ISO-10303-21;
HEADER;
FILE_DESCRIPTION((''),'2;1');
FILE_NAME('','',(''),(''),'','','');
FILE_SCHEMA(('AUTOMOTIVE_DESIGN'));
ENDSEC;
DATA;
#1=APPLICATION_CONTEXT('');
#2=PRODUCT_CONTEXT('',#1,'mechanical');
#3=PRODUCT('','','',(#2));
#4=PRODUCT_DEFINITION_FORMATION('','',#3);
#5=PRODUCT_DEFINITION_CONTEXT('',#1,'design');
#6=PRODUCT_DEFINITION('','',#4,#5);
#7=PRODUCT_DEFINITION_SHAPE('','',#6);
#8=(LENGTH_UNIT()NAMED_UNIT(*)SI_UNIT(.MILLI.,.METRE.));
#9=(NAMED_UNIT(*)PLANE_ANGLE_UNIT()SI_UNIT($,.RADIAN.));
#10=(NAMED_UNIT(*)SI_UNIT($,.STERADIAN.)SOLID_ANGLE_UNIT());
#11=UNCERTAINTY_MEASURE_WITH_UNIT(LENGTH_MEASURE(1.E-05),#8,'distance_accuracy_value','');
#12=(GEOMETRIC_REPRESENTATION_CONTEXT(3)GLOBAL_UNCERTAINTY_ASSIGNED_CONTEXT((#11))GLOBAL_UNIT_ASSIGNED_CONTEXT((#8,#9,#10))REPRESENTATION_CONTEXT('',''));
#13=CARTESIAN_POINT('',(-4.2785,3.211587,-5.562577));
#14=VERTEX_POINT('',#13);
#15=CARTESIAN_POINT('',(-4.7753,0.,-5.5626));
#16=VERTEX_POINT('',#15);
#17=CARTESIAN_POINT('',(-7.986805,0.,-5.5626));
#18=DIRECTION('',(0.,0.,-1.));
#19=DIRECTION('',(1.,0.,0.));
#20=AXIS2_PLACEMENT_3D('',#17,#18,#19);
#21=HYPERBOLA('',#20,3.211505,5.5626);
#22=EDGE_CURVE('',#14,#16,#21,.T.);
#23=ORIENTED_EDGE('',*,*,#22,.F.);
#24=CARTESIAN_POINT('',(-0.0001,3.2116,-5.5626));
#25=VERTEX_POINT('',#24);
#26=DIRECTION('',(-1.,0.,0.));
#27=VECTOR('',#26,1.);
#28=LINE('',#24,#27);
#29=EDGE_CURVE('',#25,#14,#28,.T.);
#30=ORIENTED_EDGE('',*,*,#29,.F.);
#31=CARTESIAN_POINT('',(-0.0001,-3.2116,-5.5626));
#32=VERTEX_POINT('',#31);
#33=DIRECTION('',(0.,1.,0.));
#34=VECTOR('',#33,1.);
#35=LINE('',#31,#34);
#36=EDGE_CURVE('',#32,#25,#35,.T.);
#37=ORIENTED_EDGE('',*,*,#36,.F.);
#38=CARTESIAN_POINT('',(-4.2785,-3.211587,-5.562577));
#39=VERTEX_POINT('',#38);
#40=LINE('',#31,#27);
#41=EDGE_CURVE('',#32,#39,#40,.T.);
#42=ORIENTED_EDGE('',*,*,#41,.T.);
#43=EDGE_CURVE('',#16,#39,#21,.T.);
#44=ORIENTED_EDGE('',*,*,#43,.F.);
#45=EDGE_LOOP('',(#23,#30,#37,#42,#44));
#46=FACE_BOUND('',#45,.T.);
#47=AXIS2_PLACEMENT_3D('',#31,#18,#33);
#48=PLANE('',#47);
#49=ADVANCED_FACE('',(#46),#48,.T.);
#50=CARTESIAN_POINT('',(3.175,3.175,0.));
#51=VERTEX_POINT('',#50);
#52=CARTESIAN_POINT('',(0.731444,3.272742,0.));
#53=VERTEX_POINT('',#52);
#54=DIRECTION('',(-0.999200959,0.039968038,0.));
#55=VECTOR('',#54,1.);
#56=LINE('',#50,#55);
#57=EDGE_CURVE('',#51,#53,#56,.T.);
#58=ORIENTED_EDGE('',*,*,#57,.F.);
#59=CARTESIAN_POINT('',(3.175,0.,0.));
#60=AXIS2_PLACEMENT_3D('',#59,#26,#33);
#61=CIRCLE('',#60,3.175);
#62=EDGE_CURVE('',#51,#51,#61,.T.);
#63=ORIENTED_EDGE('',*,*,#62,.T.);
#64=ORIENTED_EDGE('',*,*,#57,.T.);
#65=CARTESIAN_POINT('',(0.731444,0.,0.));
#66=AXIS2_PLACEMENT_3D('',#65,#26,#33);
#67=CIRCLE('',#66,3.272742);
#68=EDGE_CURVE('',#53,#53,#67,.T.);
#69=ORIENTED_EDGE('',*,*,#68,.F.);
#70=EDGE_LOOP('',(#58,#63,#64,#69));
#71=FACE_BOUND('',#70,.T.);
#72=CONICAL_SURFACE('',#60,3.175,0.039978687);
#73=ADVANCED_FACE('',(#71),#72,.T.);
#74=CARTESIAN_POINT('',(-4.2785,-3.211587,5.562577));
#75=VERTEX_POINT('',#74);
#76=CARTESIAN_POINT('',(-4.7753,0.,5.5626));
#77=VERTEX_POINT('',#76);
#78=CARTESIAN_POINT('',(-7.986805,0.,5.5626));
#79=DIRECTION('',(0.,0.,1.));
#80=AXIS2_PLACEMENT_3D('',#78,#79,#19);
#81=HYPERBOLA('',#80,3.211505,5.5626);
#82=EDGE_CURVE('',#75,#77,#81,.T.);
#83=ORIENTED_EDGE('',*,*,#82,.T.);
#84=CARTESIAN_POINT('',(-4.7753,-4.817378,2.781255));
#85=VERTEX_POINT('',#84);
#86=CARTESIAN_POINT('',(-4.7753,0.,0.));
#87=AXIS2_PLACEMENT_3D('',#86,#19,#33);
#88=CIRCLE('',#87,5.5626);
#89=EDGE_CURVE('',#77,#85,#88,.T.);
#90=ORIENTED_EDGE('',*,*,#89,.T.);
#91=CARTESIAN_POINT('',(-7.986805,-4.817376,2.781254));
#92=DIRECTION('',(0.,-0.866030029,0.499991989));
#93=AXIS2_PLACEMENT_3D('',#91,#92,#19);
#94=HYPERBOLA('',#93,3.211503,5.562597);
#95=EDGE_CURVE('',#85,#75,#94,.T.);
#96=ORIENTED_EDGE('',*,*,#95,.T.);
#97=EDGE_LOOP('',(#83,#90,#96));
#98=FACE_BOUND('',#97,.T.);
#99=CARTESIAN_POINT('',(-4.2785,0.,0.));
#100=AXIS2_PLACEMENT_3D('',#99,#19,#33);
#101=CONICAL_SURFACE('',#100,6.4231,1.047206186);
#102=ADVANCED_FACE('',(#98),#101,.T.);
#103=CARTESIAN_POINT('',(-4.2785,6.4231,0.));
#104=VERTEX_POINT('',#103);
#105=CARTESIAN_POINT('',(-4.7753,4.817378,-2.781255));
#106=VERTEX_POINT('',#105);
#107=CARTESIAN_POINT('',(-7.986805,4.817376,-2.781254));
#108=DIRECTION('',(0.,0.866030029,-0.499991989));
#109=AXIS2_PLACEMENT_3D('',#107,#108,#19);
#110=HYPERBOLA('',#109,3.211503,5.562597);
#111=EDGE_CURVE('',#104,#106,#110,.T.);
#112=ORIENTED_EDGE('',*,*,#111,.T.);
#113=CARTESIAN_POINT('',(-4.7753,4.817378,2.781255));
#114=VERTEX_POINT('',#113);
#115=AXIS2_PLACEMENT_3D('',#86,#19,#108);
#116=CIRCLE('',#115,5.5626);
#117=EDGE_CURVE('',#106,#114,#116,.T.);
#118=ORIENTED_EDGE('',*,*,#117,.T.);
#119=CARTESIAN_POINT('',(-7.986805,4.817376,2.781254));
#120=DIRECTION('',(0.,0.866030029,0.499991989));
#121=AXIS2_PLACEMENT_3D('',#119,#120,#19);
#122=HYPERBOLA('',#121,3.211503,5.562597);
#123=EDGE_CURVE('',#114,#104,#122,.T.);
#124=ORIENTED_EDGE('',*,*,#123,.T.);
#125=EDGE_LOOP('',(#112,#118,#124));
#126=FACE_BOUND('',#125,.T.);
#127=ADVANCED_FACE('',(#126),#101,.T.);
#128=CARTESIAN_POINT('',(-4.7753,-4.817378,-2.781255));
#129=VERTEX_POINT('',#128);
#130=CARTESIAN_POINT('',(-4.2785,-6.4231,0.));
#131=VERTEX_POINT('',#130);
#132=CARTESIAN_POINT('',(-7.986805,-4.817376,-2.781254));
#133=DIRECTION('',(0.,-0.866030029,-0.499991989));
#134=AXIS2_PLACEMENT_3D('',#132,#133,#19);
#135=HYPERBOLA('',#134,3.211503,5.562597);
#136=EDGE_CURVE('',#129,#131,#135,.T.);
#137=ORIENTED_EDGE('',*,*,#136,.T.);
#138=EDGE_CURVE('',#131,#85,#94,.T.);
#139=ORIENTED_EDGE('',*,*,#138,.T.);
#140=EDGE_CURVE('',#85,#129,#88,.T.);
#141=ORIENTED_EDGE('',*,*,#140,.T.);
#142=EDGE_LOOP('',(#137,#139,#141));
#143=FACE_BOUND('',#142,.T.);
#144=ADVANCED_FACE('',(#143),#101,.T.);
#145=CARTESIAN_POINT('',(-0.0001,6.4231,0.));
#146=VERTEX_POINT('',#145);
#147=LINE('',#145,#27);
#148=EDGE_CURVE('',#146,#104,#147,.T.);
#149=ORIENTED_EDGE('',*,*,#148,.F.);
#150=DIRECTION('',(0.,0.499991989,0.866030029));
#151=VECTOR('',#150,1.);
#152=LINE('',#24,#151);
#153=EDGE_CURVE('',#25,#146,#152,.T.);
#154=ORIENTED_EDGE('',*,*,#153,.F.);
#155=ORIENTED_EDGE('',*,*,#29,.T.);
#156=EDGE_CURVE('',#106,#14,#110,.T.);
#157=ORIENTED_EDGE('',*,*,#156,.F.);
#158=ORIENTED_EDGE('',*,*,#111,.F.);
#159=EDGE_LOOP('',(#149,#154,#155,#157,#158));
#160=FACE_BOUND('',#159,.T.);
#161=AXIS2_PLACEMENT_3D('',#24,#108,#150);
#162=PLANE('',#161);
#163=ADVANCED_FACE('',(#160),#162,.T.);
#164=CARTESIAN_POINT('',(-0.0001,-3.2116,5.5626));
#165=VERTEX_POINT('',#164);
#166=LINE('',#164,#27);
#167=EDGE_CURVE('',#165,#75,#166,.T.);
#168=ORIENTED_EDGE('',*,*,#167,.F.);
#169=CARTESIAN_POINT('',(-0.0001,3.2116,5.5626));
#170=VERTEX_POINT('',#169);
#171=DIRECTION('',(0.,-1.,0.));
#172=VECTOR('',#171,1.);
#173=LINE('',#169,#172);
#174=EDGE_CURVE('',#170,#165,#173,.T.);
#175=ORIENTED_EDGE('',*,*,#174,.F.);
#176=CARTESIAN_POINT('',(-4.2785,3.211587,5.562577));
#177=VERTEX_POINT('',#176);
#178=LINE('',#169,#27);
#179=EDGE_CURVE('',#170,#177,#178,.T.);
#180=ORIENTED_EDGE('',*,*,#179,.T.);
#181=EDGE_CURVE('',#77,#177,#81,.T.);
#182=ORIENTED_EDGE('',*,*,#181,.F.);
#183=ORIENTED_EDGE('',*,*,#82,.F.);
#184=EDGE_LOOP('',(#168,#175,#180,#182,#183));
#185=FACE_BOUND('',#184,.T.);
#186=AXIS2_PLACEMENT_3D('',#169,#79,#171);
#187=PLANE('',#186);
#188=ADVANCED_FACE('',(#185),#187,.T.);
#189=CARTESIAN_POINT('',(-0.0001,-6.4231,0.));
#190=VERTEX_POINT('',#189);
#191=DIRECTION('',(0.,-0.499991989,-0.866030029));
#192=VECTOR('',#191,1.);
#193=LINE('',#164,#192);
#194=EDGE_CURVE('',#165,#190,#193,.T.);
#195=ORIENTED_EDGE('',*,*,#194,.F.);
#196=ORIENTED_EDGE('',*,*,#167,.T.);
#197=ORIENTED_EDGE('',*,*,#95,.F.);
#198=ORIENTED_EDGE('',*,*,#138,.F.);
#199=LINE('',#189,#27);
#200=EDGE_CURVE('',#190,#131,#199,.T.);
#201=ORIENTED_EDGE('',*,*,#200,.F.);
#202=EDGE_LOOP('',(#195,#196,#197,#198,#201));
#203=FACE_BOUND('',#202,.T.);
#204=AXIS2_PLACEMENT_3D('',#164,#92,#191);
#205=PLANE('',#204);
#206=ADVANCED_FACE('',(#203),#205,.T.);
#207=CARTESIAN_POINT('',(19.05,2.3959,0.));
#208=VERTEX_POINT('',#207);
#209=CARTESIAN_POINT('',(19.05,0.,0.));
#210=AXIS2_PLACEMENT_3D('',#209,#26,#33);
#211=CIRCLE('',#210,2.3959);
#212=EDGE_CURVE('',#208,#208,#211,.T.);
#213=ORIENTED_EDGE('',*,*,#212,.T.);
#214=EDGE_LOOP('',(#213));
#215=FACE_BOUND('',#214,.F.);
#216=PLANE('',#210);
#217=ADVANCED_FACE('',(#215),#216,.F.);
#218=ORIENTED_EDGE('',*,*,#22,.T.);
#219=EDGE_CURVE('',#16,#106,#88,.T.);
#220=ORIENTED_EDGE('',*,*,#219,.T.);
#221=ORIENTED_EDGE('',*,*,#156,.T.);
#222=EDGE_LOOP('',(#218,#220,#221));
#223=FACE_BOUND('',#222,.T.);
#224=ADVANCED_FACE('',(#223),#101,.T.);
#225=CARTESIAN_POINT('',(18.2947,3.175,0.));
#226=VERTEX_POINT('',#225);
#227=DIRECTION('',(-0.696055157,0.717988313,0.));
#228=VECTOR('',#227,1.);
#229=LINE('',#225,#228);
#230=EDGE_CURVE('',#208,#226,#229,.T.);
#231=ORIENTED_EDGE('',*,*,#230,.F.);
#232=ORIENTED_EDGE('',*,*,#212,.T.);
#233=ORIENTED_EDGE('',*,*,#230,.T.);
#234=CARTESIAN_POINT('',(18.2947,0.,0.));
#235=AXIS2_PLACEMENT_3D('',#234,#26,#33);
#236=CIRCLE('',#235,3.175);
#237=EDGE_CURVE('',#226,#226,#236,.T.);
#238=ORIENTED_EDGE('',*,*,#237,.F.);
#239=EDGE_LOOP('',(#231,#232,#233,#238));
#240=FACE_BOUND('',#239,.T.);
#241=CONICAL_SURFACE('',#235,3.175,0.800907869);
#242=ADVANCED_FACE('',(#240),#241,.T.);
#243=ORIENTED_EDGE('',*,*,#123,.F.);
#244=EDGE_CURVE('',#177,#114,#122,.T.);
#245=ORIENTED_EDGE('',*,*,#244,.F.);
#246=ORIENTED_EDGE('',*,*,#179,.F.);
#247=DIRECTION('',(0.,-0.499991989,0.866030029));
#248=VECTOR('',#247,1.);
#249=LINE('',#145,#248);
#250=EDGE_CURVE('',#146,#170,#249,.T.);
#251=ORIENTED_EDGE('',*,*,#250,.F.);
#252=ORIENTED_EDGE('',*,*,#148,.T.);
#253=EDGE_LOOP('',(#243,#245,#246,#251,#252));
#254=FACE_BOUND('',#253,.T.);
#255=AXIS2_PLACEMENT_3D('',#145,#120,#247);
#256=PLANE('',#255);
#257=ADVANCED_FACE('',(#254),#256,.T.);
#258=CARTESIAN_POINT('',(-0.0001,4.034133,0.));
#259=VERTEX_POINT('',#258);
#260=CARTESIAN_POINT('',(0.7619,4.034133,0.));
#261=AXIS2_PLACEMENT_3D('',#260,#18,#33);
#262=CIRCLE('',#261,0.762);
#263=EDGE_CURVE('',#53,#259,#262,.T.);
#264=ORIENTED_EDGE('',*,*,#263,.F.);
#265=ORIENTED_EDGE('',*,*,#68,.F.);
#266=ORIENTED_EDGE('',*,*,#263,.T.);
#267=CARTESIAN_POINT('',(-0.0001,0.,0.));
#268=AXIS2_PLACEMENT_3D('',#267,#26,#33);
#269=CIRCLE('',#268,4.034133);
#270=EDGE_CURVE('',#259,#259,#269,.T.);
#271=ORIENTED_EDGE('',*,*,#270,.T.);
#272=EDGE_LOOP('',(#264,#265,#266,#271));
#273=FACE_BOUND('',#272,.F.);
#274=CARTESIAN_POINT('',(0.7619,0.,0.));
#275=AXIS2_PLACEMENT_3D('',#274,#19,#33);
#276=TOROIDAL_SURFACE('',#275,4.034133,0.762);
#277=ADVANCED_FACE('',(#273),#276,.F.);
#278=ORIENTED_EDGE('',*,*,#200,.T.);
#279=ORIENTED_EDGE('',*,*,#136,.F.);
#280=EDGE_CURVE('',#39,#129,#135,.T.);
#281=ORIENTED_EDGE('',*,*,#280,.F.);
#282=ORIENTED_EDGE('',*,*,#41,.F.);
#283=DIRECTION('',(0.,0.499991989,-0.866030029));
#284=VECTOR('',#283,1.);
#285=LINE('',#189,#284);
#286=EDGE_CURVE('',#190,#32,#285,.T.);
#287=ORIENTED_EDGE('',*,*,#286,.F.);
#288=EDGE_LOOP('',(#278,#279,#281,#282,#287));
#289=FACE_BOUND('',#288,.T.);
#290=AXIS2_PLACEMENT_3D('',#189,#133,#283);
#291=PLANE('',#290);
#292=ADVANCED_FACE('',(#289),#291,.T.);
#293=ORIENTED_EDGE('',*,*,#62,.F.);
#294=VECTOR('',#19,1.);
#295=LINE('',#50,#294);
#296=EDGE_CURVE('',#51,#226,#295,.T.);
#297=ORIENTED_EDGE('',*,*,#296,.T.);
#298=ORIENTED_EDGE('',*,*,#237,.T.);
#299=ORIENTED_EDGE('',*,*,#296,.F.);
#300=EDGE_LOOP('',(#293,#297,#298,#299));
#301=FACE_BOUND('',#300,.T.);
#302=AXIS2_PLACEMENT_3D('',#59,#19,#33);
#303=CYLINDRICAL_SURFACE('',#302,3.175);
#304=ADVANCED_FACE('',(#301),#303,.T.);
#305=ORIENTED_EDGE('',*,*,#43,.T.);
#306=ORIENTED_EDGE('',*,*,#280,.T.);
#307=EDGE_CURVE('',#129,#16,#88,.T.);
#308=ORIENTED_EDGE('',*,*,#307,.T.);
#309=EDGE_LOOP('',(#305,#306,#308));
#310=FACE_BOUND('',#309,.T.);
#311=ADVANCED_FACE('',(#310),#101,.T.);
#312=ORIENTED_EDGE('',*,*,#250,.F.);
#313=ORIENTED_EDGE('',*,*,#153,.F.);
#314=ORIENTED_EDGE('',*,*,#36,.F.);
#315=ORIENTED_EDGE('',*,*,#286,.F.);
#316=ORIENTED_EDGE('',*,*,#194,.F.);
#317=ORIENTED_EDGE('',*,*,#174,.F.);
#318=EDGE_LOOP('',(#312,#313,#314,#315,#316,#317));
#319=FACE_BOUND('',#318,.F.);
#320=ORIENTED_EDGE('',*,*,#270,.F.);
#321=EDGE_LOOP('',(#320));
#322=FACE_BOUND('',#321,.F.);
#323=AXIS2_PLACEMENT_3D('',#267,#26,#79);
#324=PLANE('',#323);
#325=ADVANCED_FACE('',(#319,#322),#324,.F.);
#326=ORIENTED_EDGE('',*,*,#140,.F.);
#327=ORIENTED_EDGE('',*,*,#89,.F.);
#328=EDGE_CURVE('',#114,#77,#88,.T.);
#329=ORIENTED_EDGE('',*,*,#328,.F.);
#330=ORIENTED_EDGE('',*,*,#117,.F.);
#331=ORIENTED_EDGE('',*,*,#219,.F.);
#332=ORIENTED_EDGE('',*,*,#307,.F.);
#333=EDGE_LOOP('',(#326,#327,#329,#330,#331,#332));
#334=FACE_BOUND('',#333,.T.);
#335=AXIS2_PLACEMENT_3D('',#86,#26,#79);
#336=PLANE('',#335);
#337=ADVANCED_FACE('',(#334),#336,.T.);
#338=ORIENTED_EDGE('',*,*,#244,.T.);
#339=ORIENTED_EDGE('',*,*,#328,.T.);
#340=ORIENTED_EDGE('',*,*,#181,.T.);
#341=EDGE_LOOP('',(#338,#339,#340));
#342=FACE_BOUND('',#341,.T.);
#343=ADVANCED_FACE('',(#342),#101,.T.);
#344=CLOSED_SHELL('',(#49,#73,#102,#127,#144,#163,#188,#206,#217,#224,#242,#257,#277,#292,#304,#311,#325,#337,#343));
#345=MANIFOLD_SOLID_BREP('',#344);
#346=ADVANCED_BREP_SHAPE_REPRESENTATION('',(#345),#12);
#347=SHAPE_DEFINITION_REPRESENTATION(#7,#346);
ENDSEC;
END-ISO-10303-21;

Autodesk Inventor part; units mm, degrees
ref_plane "YZ Plane" through (0, 0, 0) normal (1, 0, 0) x (0, 1, 0)
ref_plane "XZ Plane" through (0, 0, 0) normal (0, 1, 0) x (-1, 0, 0)
sketch "Sketch1" plane through (0, 0, 0) normal (0, 0, 1) x (1, 0, 0)
  line L0 (0, 5.5626) -> (0, 3.302)
  line L1 (3.175, 3.175) -> (19.05, 3.175)
  line L2 (19.05, 3.175) -> (19.05, 0)
  line L3 (19.05, 0) -> (-0.0001, 0)
  line L4 (-3.8101, 0) -> (22.86, 0) projected
  line L5 (-0.0001, 0) -> (-0.0001, 5.5626)
  line L6 (-0.0001, 5.5626) -> (0, 5.5626)
  line L7 (3.175, 3.175) -> (0.0019, 3.302)
  line L8 (0.0019, 3.302) -> (0, 3.302)
  line L9 (0, -1.1125) -> (0, 6.6751) projected
  dimension "d0" = 19.05
  dimension "d1" = 15.875
  dimension "d2" = 6.35
  dimension "d9" = 0.0001
  dimension "d10" = 11.1252
  dimension "d13" = 3.1731
  dimension "d14" = 6.604
revolve "Body" add sketch "Sketch1" angle 360 about axis through (19.05, 0, 0) along (-1, 0, 0)
sketch "Sketch2" plane through (-0.0001, 0, 0) normal (-1, 0, 0) x (0, 0, 1)
  line L0 (0, 6.4231) -> (5.5626, 3.2116)
  line L1 (5.5626, 3.2116) -> (5.5626, -3.2116)
  line L2 (5.5626, -3.2116) -> (0, -6.4231)
  line L3 (0, -6.4231) -> (-5.5626, -3.2116)
  line L4 (-5.5626, -3.2116) -> (-5.5626, 3.2116)
  line L5 (-5.5626, 3.2116) -> (0, 6.4231)
  point P0 (0, 0)
  point P1 (0, 0)
  dimension "d11" = 11.1252
extrude "Head" add sketch "Sketch2" along normal blind 4.7752
sketch "Sketch4" plane through (0, 0, 0) normal (0, 0, 1) x (1, 0, 0)
  line L0 (-4.7753, 5.5626) -> (-4.7753, 6.4231)
  line L1 (-4.7753, 6.4231) -> (-4.2785, 6.4231)
  line L2 (-4.2785, 6.4231) -> (-4.7753, 5.5626)
  line L3 (-5.7303, 0) -> (0.9549, 0) projected
  line L4 (-0.0001, 6.4231) -> (-4.7753, 6.4231) projected
  line L5 (-4.7753, 3.2116) -> (-4.7753, 6.4231) projected
  dimension "d5" = 30
  dimension "d19" = 11.1252
revolve "Chamfer1" cut sketch "Sketch4" angle 360 about axis through (-10, 0, 0) along (1, 0, 0)
thread "Thread" size "1/4-20 UNC" class "2A" standard "ANSI Unified Screw Threads" length 15.875
chamfer "Chamfer2" distance 0.7791 distance2 0.7553 1 edges at (19.05, -3.175, 0) measured on face at (19.05, -0.5663, 0.5832)
ref_plane "Work Plane1" through (1.525, 0, 0) normal (0, 0, 1) x (1, 0, 0)
fillet "Fillet2" radius 0.762 1 edges at (0.0019, -3.302, 0)
equation "\"d0\" = NLG"
equation "\"d1\" = GEL"
equation "\"d2\" = GD"
equation "\"d10\" = SD2"
equation "\"d14\" = BDM"
equation "\"d11\" = SW"
equation "\"d3\" = KOH - SD"
equation "\"d5\" = ANG1"
equation "\"d19\" = SW0"
equation "\"d63\" = R"
equation "\"d15\" = GEL"
equation "\"d6\" = -0.5 * SPD + 0.5 * GD"
equation "\"NLG\" = 19.05"
equation "\"GD\" = NND"
equation "\"BDM\" = 6.604"
equation "\"KOH\" = 4.7752"
equation "\"GEL\" = 15.875"
equation "\"SW\" = 11.1252"
equation "\"SW0\" = SW"
equation "\"SPD\" = GD1"
equation "\"SD2\" = SW"
equation "\"SD\" = 0"
equation "\"ANG1\" = 30deg"
equation "\"GAL\" = 3.173"
equation "\"GUL\" = 0.238 * GAL"
equation "\"R\" = 0.762"
equation "\"d62\" = -NLG - SD + GUL"
equation "\"GD1\" = 4.79184"
equation "\"THREADDIA\" = 6.35"
equation "\"TOA\" = 30deg"
equation "\"NND\" = 6.35"
equation "\"E0\" = 1.155 * SW"
properties part number "ANSI/ASME B18.2.1 - 1/4-20 UNC - 0.75" material "Steel, Mild"
